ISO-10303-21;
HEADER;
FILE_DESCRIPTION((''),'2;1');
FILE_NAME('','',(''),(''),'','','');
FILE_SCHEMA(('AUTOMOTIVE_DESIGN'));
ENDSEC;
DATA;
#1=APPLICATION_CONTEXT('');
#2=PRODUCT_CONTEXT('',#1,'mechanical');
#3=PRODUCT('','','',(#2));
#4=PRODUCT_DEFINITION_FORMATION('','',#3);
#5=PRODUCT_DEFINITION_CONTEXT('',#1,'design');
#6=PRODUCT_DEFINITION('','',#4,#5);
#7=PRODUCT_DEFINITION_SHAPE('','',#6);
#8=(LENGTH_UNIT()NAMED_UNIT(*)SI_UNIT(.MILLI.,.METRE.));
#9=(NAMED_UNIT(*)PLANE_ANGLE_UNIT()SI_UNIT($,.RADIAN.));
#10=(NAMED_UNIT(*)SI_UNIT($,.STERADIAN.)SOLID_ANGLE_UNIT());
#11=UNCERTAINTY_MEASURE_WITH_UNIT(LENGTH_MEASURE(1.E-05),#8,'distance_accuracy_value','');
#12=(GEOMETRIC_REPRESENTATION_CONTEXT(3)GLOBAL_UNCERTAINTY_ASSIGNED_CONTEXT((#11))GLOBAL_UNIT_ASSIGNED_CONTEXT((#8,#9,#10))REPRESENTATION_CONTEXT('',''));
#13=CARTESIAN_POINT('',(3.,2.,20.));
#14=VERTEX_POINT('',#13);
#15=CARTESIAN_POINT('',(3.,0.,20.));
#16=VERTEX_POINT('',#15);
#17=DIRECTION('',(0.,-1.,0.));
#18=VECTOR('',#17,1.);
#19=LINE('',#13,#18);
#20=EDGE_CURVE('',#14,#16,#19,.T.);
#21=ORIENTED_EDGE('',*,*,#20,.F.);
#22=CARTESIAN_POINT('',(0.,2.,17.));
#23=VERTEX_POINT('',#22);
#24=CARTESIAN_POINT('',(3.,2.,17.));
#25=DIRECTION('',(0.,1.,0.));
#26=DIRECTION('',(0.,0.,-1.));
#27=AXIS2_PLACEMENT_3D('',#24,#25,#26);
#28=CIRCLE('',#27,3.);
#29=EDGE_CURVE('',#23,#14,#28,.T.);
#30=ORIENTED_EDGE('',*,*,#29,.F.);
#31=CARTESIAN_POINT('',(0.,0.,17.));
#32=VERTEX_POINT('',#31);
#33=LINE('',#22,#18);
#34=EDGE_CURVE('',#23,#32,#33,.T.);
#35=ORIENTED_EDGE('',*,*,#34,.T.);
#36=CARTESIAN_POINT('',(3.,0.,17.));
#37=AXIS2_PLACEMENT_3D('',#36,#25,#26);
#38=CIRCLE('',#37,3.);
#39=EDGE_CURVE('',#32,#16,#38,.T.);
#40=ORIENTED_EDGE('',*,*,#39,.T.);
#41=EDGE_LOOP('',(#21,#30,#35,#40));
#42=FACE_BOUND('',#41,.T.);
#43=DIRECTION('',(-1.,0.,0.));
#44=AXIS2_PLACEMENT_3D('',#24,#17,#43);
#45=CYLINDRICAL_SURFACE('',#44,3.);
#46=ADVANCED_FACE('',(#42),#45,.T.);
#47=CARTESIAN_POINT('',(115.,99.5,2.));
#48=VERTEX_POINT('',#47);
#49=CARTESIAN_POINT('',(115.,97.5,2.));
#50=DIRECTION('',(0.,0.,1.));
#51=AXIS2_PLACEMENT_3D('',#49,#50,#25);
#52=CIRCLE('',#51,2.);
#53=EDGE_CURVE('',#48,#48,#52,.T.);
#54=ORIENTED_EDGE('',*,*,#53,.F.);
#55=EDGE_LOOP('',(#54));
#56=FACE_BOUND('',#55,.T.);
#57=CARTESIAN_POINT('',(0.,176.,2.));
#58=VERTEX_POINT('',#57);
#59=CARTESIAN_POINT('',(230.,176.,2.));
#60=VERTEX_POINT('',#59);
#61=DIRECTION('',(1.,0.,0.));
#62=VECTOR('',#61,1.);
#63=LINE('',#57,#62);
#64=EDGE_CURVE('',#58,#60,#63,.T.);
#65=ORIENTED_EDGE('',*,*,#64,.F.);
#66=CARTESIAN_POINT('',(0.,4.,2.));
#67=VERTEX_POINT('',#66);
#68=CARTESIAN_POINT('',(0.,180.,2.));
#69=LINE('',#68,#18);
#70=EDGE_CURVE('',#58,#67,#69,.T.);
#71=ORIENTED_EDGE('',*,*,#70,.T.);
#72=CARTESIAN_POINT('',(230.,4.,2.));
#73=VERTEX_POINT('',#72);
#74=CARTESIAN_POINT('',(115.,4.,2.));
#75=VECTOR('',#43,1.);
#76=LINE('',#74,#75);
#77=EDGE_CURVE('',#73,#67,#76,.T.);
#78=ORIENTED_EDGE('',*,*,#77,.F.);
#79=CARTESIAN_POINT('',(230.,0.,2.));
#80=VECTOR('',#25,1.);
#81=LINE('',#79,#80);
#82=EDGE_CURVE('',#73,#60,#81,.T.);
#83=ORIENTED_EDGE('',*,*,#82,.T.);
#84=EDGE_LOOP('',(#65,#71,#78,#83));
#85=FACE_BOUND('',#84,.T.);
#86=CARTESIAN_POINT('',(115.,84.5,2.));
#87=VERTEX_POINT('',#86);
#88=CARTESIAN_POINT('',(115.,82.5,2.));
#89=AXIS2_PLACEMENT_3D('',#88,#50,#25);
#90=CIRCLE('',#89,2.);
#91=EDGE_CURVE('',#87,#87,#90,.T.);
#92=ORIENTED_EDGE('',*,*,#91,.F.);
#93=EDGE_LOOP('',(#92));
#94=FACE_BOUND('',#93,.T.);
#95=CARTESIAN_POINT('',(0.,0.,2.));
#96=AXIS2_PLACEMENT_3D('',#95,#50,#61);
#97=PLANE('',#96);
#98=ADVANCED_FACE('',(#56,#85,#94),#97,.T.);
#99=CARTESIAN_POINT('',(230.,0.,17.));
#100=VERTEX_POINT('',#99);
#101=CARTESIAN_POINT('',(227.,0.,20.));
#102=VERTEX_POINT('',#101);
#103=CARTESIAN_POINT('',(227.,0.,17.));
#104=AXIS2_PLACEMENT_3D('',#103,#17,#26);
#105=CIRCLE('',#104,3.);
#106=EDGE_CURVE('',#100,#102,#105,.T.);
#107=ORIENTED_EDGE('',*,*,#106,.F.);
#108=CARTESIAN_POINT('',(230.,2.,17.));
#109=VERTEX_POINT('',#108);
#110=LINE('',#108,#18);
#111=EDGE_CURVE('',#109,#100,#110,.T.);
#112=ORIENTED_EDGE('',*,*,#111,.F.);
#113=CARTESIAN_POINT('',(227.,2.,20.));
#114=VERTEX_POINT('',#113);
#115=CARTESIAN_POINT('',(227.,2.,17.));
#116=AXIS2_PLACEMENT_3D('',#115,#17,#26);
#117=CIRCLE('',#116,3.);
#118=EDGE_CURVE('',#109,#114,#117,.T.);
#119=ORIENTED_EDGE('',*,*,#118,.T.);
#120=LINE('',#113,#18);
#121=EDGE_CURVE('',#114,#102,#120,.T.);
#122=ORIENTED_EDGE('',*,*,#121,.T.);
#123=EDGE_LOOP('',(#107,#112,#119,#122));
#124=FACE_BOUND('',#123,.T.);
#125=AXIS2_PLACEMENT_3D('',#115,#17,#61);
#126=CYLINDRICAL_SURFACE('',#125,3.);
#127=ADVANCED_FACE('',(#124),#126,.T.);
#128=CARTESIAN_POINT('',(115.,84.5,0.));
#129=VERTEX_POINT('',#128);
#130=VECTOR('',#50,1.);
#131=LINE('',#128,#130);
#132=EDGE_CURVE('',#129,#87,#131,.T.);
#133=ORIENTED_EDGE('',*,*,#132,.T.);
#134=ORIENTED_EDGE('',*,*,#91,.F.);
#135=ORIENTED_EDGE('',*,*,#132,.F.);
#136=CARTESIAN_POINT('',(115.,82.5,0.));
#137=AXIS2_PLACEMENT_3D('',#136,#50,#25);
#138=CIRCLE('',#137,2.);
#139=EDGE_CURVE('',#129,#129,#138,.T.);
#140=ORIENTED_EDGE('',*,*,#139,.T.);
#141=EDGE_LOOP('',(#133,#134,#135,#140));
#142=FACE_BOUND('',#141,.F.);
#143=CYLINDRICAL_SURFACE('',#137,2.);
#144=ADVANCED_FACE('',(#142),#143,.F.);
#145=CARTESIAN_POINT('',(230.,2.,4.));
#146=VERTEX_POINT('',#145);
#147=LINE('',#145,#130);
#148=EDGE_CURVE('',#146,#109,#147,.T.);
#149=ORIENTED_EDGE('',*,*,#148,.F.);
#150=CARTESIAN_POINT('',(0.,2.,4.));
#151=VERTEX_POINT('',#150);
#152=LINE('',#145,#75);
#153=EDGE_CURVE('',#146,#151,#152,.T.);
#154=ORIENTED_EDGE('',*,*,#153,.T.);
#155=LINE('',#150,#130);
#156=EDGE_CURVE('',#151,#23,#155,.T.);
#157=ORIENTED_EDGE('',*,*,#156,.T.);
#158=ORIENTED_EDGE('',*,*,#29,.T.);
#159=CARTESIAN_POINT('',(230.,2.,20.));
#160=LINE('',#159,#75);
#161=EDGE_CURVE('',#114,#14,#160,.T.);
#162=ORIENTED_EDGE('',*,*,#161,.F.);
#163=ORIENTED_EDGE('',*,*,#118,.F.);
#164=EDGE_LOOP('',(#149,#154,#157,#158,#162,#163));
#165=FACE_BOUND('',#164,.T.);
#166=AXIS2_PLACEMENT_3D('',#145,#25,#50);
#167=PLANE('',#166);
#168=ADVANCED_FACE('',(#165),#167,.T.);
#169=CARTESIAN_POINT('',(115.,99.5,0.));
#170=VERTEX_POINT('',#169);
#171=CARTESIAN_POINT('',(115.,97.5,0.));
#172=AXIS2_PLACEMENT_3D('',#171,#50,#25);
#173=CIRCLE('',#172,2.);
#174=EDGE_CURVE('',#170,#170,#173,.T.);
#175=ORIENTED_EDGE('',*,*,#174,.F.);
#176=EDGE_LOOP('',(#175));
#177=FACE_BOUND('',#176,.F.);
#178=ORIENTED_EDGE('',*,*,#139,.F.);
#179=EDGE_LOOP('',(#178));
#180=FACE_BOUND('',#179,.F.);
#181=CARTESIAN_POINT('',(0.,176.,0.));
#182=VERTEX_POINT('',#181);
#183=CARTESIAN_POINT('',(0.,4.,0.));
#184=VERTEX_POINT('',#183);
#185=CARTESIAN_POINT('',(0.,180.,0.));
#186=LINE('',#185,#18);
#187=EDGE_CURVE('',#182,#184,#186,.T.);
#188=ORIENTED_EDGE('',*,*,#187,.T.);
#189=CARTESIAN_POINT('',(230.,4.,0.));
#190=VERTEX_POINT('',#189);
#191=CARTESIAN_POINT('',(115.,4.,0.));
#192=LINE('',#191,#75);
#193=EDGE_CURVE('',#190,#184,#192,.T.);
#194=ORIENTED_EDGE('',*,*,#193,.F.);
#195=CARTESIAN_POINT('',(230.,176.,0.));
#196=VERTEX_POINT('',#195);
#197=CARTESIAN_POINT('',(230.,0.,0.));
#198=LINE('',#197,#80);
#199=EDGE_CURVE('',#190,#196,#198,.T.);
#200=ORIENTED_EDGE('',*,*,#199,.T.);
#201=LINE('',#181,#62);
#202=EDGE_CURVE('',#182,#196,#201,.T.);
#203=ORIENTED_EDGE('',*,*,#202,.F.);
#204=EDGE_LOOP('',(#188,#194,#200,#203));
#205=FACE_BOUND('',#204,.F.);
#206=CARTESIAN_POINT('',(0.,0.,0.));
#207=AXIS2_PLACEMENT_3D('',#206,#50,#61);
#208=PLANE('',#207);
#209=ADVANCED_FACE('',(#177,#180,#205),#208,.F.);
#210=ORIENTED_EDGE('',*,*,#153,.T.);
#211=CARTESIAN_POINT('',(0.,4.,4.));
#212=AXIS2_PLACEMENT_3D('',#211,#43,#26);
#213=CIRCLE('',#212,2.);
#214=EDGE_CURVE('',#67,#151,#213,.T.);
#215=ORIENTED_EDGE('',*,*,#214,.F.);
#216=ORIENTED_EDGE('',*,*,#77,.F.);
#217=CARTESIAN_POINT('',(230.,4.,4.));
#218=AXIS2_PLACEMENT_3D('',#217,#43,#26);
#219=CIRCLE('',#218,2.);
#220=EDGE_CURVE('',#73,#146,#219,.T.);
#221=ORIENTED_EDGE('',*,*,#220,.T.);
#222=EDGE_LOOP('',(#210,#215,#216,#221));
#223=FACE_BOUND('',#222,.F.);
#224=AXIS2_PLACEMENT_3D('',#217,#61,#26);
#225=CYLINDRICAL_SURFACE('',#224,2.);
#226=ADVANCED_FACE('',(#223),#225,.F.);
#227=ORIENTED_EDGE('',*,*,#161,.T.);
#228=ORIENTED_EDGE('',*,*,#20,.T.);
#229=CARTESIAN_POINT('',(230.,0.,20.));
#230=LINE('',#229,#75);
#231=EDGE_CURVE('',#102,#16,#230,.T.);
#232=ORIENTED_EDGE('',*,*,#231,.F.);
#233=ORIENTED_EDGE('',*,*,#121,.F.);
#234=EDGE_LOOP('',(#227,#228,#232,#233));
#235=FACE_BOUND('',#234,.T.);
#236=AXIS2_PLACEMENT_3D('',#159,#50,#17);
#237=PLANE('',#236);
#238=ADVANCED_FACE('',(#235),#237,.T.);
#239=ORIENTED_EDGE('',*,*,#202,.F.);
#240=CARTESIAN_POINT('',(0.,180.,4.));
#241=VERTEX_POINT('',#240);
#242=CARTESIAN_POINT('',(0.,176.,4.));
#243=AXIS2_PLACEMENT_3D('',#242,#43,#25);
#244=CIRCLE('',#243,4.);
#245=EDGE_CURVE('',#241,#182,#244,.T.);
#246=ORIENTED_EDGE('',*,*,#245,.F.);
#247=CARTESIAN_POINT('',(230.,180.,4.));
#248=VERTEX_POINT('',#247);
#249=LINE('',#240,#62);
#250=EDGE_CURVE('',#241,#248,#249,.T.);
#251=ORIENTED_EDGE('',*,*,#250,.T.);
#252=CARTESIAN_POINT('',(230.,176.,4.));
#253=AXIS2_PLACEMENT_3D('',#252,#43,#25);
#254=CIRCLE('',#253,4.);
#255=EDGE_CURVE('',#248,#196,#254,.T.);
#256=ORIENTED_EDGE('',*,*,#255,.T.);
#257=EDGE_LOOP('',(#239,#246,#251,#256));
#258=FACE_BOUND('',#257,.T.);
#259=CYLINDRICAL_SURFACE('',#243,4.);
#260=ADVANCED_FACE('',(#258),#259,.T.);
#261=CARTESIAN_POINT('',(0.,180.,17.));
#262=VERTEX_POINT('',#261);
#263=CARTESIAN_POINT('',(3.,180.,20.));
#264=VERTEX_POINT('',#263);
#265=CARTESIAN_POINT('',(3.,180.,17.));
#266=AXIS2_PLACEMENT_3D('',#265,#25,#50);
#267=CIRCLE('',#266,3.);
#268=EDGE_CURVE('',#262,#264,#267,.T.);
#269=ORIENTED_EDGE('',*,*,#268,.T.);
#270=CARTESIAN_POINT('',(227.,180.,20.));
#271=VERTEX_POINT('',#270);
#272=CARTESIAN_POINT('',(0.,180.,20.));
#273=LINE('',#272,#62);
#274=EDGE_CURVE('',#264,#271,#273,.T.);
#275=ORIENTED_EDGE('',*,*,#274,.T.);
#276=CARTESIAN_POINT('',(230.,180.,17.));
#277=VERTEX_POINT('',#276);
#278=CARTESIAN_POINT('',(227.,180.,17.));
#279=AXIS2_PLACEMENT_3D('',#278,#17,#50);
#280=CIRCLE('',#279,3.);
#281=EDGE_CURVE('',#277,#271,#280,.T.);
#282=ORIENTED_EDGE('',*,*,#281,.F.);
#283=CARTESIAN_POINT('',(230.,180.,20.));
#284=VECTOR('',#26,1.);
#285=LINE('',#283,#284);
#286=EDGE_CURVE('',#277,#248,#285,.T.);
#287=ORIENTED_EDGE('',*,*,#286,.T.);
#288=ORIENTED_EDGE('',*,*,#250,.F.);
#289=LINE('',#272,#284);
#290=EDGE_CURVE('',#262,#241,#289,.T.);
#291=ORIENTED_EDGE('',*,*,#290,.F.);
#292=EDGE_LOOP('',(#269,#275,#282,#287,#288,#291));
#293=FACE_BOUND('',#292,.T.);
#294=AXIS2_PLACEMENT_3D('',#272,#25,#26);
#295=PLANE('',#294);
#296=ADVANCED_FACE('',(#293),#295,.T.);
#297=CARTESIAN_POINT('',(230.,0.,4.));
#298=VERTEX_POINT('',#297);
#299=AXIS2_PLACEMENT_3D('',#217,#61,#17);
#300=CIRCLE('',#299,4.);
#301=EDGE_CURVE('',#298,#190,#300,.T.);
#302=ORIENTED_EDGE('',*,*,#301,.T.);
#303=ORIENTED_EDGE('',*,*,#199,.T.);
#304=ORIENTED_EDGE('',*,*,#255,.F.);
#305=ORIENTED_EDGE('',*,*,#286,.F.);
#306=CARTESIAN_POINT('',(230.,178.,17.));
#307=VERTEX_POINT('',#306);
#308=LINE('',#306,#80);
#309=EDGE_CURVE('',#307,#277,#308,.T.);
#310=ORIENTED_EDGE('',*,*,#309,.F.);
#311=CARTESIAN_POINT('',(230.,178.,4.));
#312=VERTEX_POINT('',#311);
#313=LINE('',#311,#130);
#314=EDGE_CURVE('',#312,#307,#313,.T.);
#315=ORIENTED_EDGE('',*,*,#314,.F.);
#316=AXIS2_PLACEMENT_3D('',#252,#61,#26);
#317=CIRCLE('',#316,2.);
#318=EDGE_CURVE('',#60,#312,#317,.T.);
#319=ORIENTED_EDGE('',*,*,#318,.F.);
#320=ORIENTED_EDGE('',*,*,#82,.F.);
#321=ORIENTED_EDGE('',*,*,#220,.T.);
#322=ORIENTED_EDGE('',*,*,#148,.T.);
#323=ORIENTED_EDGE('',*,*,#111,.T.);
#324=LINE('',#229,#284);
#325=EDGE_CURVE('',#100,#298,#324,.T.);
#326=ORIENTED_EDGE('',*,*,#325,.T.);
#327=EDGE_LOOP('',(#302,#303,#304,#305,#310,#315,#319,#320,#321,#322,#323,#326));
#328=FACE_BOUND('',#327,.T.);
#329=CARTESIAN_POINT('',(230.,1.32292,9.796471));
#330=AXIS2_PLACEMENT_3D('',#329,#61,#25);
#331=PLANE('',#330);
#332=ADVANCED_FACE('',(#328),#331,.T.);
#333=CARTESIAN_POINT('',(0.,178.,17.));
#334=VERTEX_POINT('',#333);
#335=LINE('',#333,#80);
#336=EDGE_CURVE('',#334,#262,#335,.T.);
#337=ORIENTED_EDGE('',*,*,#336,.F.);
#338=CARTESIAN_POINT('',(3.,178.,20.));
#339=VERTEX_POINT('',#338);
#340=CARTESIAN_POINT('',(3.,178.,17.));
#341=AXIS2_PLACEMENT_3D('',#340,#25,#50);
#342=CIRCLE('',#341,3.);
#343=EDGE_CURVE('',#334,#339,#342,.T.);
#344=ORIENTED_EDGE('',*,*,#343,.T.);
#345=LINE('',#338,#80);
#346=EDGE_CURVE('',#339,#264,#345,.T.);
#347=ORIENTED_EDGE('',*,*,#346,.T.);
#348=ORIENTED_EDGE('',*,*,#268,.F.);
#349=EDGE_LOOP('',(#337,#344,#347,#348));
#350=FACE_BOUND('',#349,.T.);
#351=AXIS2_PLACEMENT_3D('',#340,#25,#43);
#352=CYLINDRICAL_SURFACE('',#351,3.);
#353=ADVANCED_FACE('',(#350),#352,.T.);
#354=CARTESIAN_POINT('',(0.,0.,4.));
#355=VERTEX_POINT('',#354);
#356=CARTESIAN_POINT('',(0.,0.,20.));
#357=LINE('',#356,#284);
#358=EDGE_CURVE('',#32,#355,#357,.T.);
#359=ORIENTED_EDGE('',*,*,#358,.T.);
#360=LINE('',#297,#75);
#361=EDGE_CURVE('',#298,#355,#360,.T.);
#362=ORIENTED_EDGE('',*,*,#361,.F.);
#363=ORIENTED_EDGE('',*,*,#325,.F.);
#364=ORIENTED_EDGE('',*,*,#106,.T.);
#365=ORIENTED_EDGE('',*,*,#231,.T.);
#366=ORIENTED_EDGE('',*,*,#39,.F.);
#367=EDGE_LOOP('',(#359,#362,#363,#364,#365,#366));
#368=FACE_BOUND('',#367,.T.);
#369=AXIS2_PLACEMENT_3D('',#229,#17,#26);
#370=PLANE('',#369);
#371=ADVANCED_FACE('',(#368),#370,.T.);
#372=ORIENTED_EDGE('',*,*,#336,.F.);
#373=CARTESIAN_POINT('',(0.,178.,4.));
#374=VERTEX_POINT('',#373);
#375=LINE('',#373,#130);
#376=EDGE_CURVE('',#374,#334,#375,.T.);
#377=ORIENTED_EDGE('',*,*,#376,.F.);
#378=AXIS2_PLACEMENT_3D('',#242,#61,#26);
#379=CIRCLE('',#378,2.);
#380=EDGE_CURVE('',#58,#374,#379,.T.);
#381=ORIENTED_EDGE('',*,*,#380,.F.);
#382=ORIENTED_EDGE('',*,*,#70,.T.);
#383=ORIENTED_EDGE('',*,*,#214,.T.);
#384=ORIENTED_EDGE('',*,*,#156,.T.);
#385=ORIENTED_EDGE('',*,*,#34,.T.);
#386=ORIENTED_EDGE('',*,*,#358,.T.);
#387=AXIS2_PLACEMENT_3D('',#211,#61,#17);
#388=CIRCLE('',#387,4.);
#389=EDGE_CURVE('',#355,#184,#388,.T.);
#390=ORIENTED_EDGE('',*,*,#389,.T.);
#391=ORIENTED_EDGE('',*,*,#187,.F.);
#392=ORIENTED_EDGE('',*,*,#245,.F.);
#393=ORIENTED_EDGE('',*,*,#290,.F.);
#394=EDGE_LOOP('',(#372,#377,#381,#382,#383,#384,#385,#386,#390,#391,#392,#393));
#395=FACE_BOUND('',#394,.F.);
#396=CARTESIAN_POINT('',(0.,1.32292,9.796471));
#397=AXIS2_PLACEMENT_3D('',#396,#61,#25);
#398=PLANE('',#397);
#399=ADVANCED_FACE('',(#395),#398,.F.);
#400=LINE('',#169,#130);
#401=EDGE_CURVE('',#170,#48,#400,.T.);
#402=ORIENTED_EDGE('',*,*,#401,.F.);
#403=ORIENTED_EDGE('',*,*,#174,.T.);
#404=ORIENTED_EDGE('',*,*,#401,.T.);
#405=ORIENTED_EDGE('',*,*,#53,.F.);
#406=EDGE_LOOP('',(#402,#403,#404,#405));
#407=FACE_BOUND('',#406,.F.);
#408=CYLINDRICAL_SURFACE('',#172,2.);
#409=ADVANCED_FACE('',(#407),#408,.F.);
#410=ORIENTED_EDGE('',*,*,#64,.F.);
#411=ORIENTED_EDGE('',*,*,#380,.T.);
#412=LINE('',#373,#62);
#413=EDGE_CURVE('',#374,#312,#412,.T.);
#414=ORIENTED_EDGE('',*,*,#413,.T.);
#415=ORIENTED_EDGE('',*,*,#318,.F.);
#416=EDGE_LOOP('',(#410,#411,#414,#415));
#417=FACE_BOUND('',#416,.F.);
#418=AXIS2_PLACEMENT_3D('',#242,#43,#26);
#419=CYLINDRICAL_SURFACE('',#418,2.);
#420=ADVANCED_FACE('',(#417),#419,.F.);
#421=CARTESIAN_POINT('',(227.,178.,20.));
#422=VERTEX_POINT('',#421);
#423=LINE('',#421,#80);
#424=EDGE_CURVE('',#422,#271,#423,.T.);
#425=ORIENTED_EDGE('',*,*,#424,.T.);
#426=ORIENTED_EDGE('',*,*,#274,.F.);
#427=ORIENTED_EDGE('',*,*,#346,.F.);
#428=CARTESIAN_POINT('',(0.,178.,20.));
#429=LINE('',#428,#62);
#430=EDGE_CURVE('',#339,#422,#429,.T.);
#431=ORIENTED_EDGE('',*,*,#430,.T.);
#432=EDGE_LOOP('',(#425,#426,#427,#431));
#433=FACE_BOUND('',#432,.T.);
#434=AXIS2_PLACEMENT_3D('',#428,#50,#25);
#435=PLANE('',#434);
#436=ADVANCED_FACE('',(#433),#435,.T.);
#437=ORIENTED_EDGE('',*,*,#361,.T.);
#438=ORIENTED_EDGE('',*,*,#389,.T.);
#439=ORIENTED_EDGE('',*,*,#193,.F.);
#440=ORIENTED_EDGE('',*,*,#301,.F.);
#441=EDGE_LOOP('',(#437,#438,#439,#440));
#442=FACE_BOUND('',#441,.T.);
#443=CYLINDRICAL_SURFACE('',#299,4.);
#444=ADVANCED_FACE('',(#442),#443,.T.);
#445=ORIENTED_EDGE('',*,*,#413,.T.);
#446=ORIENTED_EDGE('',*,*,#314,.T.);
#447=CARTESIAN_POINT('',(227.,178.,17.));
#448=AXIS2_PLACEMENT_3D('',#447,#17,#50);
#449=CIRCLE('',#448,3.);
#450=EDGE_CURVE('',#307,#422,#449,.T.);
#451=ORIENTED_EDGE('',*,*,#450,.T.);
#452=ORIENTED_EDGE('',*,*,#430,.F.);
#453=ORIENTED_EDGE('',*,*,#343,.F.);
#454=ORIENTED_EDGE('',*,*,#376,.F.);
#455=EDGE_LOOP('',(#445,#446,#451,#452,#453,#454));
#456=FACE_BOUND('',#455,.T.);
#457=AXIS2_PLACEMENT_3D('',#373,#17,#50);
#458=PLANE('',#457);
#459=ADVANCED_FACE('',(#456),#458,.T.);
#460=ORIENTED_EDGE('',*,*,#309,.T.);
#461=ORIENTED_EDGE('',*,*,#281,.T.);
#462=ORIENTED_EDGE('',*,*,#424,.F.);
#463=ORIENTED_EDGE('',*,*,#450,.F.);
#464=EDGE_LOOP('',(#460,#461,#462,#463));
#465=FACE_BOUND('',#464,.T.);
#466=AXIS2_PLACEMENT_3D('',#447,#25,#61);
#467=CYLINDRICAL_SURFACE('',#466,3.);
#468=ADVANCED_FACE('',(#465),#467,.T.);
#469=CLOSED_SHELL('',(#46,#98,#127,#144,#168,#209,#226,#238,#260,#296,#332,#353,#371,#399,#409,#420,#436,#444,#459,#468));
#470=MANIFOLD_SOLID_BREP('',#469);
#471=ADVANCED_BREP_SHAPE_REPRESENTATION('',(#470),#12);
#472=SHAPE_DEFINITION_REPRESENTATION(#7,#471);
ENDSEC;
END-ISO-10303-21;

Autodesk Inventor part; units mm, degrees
ref_plane "YZ Plane" through (0, 0, 0) normal (1, 0, 0) x (0, 1, 0)
ref_plane "XZ Plane" through (0, 0, 0) normal (0, 1, 0) x (-1, 0, 0)
ref_plane "XY Plane" through (0, 0, 0) normal (0, 0, 1) x (1, 0, 0)
sketch "Skizze1" plane through (0, 0, 0) normal (0, 0, 1) x (1, 0, 0)
  line L0 (0, 0) -> (230, 0)
  line L1 (230, 0) -> (230, 180)
  line L2 (230, 180) -> (0, 180)
  line L3 (0, 180) -> (0, 0)
  dimension "d0" = 230
  dimension "d1" = 180
extrude "Grobblech1" add sketch "Skizze1" along normal blind 2
sketch "Skizze2" plane through (230, 2, 0) normal (0, -1, 0) x (1, 0, 0)
  line L0 (-230, 0) -> (0, 0)
  line L1 (0, 0) -> (0, 20)
  line L2 (0, 20) -> (-230, 20)
  line L3 (-230, 20) -> (-230, 0)
edge flange "Lasche1" height 20 angle 90 thickness 2 bend radius 2 thickness toward (0, -1, 0) relief tear relief width 2 relief depth 1 corner gap 2 corner form 0 edges at (115, 0, 2) (115, 180, 2) wall of the first edge with corners at (0, 2, 0) (230, 2, 0) (230, 2, 20) (0, 2, 20)
bend "Biegung1"
corner "Ecke1"
sketch "Skizze3" plane through (0, 0, 0) normal (0, 0, -1) x (-1, 0, 0)
  circle A0 centre (-36.5, 97.5) radius 1.621 projected
  circle A1 centre (-36.5, 82.5) radius 1.621 projected
  circle A2 centre (-193.5, 97.5) radius 1.621 projected
  circle A3 centre (-193.5, 82.5) radius 1.621 projected
  line L0 (0, 0) -> (-36.5, 0)
  line L1 (-36.5, 0) -> (-36.5, 82.5)
  line L2 (-36.5, 82.5) -> (0, 82.5)
  line L3 (0, 82.5) -> (0, 0)
  line L4 (-36.5, 82.5) -> (-193.5, 82.5)
  line L5 (-193.5, 82.5) -> (-193.5, 97.5)
  line L6 (-193.5, 97.5) -> (-36.5, 97.5)
  line L7 (-36.5, 97.5) -> (-36.5, 82.5)
  circle A4 centre (-115, 97.5) radius 1.621 projected
  circle A5 centre (-115, 82.5) radius 1.621 projected
hole "Bohrung1" at (115, 97.5, 0) at (115, 82.5, 0) direction (0, 0, 1) diameter 4 depth 2 tip angle 118
fillet "Eckenrundung1" radius 3 4 edges at (230, 1, 20) (230, 179, 20) (0, 179, 20) (0, 1, 20)
equation "\"d19\" = Stärke"
equation "\"d2\" = Stärke"
equation "\"d3\" = BreiteBiegungsfreistellung"
equation "\"d4\" = TiefeBiegungsfreistellung"
equation "\"d5\" = MinimalRest"
equation "\"d6\" = Übergangsradius"
equation "\"d9\" = Biegeradius"
equation "\"d10\" = GrößeEckenfreistellung"
equation "\"d11\" = Abstandsgröße"
equation "\"d12\" = JacobiRadiusGröße"
equation "\"Biegeradius\" = Stärke"
equation "\"BreiteBiegungsfreistellung\" = Stärke"
equation "\"TiefeBiegungsfreistellung\" = 0.5 * Stärke"
equation "\"GrößeEckenfreistellung\" = 4 * Stärke"
equation "\"MinimalRest\" = 2 * Stärke"
equation "\"Übergangsradius\" = Biegeradius"
equation "\"JacobiRadiusGröße\" = Biegeradius"
equation "\"Abstandsgröße\" = Stärke"
equation "\"Stärke\" = 2"
properties part number "Schale_v2"
